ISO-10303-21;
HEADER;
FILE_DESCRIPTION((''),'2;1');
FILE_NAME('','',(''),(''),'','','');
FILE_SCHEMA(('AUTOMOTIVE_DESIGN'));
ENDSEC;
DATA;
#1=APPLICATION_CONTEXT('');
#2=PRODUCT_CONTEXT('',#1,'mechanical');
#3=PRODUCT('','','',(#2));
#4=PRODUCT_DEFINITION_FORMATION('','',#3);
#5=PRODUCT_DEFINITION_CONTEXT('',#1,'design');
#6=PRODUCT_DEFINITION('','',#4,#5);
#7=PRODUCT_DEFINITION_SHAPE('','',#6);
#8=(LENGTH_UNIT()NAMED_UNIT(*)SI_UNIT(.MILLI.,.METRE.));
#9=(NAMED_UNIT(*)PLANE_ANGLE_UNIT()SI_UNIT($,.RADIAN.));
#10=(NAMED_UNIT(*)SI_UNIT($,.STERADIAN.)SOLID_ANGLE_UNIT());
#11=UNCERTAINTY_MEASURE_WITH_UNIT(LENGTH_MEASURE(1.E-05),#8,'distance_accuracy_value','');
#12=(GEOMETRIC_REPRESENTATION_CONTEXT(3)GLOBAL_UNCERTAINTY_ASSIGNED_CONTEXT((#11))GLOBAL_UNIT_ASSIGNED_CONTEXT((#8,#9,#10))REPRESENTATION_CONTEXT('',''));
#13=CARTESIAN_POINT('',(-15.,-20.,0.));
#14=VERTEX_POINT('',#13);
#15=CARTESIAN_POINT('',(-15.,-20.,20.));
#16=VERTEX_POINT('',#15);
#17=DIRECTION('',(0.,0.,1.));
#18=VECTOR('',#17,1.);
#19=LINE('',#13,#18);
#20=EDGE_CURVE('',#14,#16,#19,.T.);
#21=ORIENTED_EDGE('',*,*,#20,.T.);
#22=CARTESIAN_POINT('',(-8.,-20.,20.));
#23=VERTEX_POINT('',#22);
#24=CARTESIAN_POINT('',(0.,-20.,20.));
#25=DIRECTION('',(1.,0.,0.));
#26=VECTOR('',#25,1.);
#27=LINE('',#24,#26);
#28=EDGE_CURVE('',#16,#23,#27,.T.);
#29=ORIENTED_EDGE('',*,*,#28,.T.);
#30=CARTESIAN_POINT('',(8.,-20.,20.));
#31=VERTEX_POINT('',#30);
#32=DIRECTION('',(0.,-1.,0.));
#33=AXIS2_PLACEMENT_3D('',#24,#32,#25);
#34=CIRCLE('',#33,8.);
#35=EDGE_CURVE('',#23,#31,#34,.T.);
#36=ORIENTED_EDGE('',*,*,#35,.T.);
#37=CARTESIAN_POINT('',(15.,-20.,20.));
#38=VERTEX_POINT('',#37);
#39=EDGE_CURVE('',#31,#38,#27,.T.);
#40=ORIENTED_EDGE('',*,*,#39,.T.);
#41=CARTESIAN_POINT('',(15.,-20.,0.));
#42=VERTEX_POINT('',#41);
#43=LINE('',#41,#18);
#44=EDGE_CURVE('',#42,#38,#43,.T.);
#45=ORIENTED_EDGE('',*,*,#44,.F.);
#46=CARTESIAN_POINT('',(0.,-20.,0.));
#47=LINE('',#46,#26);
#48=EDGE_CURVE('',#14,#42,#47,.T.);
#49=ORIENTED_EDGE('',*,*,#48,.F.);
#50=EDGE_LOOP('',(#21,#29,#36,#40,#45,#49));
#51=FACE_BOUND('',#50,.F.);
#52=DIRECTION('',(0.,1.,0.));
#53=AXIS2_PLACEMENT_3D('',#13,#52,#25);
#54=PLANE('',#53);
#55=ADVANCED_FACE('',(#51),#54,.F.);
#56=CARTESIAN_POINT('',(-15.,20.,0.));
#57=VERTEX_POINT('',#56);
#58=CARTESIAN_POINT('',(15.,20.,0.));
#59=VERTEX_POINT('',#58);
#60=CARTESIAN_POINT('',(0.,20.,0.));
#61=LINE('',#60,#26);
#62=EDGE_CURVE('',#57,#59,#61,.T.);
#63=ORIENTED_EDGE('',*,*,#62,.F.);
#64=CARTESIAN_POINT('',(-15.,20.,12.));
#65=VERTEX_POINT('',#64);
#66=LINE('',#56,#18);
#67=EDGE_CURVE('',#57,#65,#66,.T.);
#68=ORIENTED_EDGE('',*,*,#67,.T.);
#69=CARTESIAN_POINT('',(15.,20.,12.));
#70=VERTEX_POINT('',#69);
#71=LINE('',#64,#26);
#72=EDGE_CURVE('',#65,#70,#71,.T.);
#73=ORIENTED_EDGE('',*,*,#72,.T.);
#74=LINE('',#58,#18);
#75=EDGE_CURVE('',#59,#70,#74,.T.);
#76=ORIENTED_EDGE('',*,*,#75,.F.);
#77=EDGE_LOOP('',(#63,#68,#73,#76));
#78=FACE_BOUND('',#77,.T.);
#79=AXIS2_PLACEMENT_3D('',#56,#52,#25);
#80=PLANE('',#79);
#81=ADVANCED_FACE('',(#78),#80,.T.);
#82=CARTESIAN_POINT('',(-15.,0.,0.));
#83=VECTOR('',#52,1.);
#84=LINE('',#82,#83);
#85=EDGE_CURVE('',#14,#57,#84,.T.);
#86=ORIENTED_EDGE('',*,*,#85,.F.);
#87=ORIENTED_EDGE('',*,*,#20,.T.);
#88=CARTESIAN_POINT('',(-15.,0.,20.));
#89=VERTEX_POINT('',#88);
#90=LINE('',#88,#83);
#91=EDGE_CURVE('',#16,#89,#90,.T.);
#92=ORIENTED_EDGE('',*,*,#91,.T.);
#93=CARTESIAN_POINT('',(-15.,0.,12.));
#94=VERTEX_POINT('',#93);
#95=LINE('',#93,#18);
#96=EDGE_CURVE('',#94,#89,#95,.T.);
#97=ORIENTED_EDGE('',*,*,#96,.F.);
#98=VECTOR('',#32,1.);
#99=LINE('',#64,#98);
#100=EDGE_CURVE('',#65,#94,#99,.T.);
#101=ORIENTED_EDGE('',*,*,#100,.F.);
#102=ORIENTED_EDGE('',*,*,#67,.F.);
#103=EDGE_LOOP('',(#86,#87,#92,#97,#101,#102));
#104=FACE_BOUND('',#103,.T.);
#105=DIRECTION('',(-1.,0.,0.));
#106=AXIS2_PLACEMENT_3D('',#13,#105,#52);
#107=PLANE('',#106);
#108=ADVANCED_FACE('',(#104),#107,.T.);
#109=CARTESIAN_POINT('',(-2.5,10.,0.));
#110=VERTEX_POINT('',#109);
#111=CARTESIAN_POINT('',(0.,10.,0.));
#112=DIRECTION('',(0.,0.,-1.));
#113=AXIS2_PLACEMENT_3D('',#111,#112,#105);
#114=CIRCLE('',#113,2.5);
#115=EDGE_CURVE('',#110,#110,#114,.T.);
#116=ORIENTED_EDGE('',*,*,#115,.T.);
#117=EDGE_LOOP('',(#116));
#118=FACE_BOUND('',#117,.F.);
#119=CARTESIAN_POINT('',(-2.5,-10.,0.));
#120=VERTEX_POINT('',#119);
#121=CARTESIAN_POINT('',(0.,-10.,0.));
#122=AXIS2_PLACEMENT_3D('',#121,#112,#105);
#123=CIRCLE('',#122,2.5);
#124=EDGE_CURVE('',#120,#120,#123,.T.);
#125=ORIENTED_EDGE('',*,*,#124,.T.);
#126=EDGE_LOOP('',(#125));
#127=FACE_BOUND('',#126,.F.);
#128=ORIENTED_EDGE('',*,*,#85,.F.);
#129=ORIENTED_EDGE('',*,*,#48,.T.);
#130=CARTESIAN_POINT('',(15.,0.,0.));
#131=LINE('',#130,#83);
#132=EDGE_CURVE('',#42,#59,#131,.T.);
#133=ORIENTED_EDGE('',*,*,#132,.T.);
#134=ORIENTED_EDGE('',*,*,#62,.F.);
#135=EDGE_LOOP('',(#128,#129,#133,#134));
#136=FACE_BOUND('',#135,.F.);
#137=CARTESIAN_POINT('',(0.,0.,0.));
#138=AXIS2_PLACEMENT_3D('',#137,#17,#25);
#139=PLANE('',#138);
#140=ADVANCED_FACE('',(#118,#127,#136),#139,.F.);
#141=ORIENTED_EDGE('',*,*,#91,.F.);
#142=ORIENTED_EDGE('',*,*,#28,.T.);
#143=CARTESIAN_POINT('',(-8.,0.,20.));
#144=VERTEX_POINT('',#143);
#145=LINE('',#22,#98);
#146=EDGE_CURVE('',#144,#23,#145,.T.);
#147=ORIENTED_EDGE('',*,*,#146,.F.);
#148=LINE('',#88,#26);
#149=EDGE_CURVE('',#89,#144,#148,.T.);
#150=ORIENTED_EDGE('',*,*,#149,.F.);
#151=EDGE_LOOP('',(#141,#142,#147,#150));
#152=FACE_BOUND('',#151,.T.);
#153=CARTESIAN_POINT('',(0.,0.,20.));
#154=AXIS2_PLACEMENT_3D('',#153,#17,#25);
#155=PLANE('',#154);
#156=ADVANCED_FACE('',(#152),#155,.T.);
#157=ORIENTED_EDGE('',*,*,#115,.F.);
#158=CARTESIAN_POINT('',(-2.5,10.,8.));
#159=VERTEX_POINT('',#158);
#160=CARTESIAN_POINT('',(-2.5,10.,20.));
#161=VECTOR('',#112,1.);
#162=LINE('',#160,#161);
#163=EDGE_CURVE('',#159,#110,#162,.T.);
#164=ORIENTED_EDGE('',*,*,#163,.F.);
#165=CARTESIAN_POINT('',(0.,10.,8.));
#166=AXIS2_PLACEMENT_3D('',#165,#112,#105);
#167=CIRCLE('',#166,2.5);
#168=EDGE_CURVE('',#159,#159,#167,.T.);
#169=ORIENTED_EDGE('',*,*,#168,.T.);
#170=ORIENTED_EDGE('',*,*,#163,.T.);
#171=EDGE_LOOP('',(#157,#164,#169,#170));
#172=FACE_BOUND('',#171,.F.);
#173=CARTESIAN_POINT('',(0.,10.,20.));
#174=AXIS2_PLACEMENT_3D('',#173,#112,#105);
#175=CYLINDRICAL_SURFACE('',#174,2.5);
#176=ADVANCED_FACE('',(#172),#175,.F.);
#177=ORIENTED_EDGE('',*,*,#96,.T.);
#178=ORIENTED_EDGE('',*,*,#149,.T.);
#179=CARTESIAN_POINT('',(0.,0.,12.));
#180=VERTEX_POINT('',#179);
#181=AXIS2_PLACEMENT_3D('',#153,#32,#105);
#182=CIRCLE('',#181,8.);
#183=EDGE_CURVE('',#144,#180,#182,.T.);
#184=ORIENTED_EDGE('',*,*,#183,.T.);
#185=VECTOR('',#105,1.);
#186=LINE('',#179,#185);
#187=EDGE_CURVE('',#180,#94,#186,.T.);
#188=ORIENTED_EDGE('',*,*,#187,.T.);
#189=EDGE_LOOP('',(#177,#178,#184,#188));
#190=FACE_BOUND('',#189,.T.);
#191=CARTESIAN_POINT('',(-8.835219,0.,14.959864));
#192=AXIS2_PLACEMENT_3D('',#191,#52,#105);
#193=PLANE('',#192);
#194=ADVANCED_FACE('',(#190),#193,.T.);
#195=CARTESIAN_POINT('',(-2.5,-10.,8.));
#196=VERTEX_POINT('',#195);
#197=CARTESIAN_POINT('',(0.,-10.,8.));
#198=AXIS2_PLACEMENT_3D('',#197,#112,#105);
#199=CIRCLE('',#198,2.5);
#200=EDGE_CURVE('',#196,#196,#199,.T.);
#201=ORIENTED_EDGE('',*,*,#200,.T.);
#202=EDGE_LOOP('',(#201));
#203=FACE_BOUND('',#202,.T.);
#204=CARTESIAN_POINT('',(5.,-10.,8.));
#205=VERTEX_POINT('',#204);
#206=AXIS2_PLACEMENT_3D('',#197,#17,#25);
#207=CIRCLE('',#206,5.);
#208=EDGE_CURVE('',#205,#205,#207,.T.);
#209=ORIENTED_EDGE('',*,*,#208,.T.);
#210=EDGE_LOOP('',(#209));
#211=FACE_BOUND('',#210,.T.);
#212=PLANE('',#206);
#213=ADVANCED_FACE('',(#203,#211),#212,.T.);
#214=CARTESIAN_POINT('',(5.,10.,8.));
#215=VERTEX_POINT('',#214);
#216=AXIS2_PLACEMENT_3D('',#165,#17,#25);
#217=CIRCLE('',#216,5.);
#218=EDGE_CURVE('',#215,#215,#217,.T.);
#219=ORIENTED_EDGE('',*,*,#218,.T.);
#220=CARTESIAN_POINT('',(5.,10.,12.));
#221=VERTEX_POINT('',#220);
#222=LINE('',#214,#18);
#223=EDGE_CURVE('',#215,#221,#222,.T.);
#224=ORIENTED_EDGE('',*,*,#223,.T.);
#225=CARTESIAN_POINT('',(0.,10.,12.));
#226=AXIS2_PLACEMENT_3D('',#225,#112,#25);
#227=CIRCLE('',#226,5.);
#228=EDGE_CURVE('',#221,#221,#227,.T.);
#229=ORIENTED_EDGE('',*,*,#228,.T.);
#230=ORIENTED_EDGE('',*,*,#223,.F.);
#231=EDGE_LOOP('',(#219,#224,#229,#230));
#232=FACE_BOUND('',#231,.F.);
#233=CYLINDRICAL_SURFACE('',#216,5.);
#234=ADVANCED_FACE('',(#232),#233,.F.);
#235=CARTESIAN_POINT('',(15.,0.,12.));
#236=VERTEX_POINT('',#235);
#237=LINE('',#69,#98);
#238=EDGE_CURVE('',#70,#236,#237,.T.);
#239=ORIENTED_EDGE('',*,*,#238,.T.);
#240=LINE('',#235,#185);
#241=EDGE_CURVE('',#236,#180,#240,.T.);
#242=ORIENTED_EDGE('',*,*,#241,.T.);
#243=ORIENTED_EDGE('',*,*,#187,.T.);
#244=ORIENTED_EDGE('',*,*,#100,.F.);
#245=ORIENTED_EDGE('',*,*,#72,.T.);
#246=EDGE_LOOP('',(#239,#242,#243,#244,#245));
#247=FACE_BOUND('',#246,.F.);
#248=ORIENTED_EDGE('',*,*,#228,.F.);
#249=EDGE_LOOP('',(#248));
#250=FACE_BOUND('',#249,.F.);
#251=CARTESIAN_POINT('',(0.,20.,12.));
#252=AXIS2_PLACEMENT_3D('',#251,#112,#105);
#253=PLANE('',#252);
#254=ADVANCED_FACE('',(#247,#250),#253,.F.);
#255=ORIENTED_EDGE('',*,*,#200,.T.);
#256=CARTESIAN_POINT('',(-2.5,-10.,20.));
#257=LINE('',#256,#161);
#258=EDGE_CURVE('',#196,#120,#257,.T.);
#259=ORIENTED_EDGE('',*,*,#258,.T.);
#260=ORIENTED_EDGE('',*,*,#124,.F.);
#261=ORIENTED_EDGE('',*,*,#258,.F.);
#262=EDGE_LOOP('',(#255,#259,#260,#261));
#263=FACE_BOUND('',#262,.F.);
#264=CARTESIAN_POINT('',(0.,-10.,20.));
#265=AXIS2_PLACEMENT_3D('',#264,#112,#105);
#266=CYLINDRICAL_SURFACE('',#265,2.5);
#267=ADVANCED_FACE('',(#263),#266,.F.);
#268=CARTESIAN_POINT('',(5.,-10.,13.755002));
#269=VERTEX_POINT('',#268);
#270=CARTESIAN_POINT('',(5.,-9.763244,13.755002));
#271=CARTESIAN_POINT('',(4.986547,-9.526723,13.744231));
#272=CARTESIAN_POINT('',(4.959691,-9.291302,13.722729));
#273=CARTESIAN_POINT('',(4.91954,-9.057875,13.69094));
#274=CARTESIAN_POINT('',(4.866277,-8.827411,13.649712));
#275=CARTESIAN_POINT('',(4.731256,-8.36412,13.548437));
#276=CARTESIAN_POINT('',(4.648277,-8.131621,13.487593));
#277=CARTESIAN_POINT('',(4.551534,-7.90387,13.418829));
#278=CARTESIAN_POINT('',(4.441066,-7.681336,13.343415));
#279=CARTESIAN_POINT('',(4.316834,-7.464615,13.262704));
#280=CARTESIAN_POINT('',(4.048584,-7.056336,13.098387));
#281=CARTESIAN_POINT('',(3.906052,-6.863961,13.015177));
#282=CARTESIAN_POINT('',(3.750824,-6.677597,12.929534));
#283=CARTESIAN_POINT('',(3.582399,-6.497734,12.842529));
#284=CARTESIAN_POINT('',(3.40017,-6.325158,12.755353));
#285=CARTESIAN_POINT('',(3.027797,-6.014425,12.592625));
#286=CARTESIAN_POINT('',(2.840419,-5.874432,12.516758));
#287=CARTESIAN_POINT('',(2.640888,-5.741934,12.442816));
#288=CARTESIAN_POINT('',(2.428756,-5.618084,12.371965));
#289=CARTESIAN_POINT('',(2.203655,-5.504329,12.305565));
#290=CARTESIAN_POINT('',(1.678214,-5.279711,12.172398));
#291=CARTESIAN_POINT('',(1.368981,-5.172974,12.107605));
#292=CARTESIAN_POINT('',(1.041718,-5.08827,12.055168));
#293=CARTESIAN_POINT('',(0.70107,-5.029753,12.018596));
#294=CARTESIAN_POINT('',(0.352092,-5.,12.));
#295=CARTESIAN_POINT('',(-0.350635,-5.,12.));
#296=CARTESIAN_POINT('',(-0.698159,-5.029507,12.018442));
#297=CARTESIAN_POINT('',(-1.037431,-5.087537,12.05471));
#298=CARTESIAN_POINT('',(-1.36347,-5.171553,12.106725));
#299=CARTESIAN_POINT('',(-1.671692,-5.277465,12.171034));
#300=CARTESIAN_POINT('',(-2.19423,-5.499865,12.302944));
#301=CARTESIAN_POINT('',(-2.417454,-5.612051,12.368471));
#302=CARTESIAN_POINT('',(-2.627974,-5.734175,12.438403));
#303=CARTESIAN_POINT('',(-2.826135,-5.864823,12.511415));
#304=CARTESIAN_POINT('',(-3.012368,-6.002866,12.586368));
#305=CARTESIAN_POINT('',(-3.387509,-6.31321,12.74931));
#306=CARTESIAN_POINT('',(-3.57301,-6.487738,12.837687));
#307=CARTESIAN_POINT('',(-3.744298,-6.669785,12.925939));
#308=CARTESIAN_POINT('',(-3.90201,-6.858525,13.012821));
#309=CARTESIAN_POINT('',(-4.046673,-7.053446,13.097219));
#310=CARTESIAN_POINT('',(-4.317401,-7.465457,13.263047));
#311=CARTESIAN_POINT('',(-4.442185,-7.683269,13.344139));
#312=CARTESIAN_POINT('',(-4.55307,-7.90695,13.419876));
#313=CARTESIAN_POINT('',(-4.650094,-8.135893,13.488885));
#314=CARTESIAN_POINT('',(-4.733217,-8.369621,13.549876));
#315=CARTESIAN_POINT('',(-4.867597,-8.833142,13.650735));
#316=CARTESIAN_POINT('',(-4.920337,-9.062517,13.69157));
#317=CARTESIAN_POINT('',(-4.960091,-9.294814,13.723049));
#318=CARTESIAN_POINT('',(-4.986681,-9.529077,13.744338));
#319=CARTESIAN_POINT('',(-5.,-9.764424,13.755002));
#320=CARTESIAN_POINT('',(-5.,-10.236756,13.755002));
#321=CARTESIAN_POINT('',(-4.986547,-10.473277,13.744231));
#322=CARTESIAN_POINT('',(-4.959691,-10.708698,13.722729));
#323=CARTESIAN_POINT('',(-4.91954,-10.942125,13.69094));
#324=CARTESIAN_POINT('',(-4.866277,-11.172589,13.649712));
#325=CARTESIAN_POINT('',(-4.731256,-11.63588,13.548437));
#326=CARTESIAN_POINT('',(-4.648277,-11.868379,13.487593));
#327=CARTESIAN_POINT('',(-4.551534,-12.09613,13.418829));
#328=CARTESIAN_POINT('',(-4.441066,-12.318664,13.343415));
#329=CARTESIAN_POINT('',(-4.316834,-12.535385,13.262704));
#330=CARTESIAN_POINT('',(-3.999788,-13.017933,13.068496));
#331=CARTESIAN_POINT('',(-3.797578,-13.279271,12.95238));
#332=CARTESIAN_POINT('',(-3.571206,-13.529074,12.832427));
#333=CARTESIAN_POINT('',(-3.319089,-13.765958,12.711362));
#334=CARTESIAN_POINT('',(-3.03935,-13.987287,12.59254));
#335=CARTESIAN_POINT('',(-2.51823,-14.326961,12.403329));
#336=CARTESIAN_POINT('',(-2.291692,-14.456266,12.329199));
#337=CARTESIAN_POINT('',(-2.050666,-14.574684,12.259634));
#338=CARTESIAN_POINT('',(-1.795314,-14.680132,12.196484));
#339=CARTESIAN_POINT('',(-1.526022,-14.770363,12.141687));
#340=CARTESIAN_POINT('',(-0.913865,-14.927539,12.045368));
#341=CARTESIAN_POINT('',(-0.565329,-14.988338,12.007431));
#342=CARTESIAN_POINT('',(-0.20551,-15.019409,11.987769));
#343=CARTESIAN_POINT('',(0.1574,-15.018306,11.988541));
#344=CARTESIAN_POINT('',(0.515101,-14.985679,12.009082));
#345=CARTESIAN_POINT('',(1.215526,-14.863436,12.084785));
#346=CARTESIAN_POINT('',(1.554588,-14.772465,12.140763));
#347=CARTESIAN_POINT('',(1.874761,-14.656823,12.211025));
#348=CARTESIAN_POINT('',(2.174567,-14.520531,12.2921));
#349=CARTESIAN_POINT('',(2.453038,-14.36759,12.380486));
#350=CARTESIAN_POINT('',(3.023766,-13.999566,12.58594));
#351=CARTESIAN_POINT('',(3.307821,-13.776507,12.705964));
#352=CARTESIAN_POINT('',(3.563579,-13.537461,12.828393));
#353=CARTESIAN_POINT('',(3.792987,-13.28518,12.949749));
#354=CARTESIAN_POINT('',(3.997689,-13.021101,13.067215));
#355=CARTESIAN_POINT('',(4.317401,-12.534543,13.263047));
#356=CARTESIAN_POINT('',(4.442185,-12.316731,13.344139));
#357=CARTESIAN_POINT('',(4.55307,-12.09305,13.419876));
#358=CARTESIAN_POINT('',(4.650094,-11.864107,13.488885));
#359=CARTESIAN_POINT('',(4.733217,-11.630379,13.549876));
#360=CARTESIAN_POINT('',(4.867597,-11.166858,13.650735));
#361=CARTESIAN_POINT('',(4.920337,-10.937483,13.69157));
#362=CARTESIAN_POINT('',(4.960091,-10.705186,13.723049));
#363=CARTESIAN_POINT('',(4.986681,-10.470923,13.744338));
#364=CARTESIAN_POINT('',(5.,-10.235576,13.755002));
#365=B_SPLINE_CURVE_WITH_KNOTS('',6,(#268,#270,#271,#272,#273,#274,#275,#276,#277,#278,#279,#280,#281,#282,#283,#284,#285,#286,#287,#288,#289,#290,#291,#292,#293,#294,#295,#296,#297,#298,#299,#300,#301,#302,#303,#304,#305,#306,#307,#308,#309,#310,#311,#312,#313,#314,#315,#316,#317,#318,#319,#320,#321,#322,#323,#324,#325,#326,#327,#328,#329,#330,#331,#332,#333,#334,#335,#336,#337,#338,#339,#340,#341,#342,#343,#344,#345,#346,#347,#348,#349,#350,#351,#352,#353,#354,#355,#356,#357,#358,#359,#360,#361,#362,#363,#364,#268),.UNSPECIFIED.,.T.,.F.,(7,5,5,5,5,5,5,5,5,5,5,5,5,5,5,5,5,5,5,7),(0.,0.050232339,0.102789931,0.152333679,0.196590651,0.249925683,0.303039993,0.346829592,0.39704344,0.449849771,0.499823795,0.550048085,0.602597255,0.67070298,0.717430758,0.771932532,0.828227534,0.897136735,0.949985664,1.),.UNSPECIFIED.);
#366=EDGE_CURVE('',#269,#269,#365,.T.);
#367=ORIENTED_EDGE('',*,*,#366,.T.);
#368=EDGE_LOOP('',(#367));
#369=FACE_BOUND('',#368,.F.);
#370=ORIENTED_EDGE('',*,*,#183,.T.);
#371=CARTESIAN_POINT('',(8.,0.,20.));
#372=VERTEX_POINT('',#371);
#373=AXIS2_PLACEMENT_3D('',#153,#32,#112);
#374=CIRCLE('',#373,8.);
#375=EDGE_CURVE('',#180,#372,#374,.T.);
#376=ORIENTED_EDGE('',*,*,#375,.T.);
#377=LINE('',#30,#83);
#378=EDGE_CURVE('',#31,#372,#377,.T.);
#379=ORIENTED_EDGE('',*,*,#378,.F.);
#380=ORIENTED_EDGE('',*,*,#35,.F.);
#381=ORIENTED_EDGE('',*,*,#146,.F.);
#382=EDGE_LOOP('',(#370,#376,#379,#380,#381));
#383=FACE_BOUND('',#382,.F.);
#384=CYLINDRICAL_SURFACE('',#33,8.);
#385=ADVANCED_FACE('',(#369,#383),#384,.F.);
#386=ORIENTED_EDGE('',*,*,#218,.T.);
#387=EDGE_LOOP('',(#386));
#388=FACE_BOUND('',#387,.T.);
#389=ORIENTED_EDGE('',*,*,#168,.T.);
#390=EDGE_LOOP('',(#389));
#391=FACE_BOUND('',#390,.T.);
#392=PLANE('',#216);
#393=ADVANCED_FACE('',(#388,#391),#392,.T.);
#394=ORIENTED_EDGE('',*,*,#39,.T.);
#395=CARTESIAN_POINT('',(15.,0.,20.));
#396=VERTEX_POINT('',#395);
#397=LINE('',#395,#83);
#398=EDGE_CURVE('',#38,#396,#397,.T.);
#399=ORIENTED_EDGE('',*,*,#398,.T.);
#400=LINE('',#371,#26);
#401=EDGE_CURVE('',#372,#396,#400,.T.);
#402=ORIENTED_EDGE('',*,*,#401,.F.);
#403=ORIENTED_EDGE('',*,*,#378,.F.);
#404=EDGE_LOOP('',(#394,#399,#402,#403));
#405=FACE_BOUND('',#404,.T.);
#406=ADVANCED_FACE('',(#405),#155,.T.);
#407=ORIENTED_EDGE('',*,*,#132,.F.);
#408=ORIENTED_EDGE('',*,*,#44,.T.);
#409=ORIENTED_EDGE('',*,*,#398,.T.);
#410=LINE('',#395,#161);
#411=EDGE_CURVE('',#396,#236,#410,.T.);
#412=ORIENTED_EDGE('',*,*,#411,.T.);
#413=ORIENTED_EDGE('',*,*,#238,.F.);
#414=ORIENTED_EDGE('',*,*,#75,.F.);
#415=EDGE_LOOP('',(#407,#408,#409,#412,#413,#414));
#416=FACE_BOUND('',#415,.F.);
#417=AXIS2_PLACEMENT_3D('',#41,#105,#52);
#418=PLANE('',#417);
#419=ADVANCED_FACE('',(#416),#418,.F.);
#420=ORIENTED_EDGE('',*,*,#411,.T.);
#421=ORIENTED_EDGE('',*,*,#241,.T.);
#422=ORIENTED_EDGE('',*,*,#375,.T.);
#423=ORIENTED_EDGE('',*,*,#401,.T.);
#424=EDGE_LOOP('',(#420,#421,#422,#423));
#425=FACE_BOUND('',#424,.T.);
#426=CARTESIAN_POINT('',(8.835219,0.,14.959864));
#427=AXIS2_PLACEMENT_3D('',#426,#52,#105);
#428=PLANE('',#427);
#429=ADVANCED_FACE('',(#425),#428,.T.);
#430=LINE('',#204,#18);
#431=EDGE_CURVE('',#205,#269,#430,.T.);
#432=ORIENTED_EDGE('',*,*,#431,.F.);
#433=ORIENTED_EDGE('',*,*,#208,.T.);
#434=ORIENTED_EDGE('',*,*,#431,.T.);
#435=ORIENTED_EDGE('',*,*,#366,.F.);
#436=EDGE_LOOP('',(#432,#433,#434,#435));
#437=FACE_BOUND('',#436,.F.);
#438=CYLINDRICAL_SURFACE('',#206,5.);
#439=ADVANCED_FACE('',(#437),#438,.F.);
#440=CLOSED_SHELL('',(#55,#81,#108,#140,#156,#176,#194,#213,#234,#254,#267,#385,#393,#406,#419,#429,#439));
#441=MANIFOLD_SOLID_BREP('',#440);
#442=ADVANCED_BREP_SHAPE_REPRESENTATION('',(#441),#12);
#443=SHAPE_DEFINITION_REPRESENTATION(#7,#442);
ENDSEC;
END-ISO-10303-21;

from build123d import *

# Parameters (mm, degrees)
F0_W           = 30
F0_H           = 40
F1_DEPTH       = 20
F7_D           = 5
F7_CBORE_D     = 10
F7_CBORE_DEPTH = 12
F8_DEPTH       = 40
F4_DEPTH       = 20


with BuildPart() as f1:
    # F0 (on Top) → F1 (new body)
    with BuildSketch(Plane.XY):
        Rectangle(F0_W, F0_H)
    extrude(amount=F1_DEPTH)

    # F7 (through all)
    with Locations(Plane.XY.offset(20)):
        with Locations((0, -10), (0, 10)):
            CounterBoreHole(F7_D / 2, F7_CBORE_D / 2, F7_CBORE_DEPTH)

    # F6 (on face) → F8 (cut)
    with BuildSketch(Plane.XZ.offset(20)):
        with BuildLine():
            ThreePointArc((-8, 20), (0, 12), (8, 20))
            Line((8, 20), (-8, 20))
        make_face()
        with BuildLine():
            Line((-8, 20), (8, 20))
            ThreePointArc((8, 20), (0, 28), (-8, 20))
        make_face()
    extrude(amount=-F8_DEPTH, mode=Mode.SUBTRACT)

    # F3 (on face) → F4 (cut)
    with BuildSketch(Plane(origin=(0, 20, 0), x_dir=(-1, 0, 0), z_dir=(0, 1, 0))):
        with BuildLine():
            ThreePointArc((8, 20), (5.6568542495, 14.3431457505), (0, 12))
            Line((0, 12), (15, 12))
            Line((15, 12), (15, 20))
            Line((15, 20), (8, 20))
        make_face()
        with BuildLine():
            Line((-15, 12), (0, 12))
            ThreePointArc((0, 12), (-5.6568542495, 14.3431457505), (-8, 20))
            Line((-8, 20), (-15, 20))
            Line((-15, 20), (-15, 12))
        make_face()
    extrude(amount=-F4_DEPTH, mode=Mode.SUBTRACT)


solid = f1.part
